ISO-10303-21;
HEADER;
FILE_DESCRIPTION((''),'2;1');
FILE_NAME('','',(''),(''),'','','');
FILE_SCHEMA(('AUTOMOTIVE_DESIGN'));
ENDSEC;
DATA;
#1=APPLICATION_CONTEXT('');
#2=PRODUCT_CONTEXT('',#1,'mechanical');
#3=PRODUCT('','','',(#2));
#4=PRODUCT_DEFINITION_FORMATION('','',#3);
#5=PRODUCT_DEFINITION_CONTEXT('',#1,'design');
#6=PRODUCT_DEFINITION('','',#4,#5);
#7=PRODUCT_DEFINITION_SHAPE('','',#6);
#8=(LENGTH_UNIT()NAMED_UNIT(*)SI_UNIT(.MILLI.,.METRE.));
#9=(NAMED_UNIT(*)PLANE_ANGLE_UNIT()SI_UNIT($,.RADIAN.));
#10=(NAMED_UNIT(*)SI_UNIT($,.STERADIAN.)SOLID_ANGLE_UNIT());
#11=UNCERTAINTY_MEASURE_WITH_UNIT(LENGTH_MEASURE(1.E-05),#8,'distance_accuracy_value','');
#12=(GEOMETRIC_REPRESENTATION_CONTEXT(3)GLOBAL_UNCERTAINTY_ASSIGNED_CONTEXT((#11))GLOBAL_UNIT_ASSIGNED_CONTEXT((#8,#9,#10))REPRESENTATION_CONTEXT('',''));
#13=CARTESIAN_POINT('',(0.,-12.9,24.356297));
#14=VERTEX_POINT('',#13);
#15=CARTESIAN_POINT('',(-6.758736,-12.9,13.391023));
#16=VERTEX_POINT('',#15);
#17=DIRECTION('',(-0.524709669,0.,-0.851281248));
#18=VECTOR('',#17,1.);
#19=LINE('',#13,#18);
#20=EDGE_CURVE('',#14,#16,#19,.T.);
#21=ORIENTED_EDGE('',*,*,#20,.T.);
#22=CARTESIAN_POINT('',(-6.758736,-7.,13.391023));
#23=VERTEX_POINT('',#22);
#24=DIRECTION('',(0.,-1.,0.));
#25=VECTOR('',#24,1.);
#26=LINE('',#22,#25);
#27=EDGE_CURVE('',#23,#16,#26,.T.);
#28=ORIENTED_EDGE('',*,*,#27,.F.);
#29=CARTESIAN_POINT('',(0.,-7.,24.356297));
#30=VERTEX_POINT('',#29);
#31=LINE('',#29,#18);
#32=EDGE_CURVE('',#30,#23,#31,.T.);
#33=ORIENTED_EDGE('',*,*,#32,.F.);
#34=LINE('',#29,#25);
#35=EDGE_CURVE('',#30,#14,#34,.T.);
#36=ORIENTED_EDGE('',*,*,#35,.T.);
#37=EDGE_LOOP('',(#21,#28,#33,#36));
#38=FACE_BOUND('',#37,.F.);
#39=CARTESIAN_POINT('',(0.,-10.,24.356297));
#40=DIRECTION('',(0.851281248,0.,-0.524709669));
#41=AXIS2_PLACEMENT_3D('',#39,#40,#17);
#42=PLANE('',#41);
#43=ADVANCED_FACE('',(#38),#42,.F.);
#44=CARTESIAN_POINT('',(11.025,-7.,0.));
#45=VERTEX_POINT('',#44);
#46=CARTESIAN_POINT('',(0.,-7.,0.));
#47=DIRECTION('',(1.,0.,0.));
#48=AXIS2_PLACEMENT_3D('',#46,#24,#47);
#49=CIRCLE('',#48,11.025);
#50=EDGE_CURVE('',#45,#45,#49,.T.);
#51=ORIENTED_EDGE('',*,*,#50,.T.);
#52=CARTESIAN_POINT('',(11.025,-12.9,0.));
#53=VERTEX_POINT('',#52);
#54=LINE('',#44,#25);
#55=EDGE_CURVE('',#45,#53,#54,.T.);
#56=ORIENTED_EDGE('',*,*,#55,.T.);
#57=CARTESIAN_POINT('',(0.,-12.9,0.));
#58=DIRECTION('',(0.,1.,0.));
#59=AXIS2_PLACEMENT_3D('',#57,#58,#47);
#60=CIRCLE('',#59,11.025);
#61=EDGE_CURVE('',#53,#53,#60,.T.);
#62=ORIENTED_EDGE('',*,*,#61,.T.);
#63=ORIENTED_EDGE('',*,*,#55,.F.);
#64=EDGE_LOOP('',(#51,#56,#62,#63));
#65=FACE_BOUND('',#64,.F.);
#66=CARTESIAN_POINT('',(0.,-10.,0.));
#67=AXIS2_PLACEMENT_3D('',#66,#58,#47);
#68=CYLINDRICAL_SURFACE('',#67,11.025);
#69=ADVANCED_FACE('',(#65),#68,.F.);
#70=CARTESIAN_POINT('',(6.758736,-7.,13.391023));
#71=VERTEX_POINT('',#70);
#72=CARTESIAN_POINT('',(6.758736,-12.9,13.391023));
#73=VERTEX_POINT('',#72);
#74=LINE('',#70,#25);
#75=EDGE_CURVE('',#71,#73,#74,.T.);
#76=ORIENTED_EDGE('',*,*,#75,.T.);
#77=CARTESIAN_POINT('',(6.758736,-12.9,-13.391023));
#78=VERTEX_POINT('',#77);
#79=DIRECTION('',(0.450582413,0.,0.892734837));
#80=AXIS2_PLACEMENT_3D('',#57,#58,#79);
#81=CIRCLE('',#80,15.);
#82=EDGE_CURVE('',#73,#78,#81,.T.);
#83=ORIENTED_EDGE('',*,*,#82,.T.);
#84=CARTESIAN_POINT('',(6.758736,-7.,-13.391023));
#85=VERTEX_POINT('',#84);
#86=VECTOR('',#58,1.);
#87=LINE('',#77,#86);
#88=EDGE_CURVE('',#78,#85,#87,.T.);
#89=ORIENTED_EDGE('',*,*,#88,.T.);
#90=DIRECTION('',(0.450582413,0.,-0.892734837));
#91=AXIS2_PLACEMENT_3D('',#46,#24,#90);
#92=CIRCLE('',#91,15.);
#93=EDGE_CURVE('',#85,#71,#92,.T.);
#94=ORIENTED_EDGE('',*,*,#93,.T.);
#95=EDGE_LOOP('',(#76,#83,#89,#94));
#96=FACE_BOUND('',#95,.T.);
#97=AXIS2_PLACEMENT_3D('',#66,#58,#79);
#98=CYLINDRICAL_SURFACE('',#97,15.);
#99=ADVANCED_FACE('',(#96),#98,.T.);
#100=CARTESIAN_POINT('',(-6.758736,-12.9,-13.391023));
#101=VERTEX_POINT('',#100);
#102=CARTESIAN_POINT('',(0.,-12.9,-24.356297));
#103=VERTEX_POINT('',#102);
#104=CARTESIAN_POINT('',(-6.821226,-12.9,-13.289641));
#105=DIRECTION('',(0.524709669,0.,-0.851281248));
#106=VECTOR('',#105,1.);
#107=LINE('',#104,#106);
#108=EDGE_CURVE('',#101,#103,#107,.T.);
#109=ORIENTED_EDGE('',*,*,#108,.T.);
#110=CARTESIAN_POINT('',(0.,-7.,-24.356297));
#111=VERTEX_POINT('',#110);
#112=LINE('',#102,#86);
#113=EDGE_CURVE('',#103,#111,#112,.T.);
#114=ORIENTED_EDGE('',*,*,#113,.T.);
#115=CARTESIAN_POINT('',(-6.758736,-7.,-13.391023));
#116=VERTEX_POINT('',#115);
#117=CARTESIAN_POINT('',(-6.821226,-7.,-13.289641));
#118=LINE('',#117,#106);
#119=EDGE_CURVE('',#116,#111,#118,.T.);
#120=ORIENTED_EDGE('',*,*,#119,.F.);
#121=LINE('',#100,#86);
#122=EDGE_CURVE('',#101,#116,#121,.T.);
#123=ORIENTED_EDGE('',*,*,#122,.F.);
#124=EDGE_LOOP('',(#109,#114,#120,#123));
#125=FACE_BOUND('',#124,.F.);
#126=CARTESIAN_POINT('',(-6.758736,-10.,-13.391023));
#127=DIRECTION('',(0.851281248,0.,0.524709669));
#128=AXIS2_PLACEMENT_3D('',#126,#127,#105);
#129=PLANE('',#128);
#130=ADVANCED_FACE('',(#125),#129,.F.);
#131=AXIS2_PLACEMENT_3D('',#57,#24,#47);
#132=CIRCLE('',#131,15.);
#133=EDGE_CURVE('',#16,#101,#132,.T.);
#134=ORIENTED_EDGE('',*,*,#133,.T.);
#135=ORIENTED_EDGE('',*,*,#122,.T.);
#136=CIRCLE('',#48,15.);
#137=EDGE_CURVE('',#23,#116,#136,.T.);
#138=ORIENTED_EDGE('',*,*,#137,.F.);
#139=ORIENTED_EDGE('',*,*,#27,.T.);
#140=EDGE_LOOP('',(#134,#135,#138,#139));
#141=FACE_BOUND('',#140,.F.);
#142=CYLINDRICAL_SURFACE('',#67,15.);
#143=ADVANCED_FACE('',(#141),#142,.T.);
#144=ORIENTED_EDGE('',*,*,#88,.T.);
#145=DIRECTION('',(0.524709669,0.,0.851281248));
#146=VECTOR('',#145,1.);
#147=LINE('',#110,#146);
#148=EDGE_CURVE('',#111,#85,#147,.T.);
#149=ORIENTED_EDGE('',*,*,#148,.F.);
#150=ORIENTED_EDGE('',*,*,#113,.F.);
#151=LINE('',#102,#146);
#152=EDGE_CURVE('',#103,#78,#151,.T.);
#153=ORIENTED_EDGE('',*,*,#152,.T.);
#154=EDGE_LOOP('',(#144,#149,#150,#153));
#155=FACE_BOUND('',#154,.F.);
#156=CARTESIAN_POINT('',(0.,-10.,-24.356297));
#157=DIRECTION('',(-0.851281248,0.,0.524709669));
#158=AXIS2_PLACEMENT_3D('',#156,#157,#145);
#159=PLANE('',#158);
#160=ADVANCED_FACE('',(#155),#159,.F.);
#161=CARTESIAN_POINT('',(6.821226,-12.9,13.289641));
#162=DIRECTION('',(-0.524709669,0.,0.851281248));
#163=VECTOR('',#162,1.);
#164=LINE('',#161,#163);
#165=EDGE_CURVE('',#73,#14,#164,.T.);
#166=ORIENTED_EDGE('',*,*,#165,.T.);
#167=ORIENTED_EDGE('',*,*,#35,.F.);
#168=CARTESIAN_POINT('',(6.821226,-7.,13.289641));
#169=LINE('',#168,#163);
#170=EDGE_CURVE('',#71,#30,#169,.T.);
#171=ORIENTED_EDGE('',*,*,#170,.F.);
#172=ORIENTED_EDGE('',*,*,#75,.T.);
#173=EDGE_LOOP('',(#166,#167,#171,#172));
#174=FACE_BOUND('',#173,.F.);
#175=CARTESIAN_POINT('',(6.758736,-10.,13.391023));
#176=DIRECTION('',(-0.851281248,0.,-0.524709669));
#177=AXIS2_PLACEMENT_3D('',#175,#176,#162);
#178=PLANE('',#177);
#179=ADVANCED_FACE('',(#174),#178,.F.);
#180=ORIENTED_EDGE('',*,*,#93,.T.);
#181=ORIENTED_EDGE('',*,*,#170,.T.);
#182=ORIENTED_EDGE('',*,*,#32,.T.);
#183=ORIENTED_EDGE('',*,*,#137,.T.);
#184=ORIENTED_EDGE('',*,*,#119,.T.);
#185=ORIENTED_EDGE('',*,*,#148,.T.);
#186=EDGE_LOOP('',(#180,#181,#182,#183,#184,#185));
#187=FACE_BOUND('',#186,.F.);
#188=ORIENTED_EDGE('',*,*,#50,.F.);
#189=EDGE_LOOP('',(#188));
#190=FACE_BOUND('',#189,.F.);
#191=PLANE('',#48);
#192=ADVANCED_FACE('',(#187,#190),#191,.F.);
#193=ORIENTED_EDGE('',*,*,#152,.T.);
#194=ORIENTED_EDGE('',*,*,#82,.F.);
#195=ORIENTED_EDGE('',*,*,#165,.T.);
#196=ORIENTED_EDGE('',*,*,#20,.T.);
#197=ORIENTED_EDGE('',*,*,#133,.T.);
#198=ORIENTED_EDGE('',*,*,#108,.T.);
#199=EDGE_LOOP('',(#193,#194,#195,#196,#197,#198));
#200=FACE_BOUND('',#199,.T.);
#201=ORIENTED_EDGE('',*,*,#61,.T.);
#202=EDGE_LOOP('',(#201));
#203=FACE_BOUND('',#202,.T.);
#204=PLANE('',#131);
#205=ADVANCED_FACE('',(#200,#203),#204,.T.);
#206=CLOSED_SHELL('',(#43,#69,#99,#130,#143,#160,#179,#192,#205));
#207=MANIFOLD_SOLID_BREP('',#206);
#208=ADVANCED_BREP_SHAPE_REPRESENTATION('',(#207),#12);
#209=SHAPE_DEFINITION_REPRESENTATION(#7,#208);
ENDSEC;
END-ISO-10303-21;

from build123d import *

# Parameters (mm, degrees)
F0_R     = 15
F0_R_2   = 11.025
F3_DEPTH = 25
F2_R     = 11.025
F4_DEPTH = 40.1
F6_DEPTH = 15
F7_DEPTH = 7
F8_DEPTH = 2.9


# Not quite as in the source:
# - ends of sketch curves that miss each other by under 0.0002 mm in the source are joined


with BuildPart() as f3:
    # F0 (on Front) → F3 (new body)
    with BuildSketch(Plane.XZ):
        Circle(F0_R)
        Circle(F0_R_2, mode=Mode.SUBTRACT)
    extrude(amount=F3_DEPTH)


with BuildPart() as f3b:
    # F1 (on Front) → F3, piece 2 (new body)
    with BuildSketch(Plane.XZ):
        Polygon((0, 24.356296724), (-6.821225702, 13.2896405025), (-6.821225702, 0), (0, 0), (6.821225702, 0), (6.821225702, 13.2896405025), align=None)
        Polygon((0, 0), (-6.821225702, 0), (-6.821225702, -10.4577671736), (-6.82123, -10.4854255915), (-6.821225702, -13.2896405025), (0, -24.356296724), (6.821225702, -13.2896405025), (6.821225702, 0), align=None)
    extrude(amount=F3_DEPTH)

    # F2 (on face) → F4 (cut)
    with BuildSketch(Plane.XZ):
        Circle(F2_R)
    extrude(amount=F4_DEPTH, mode=Mode.SUBTRACT)

    # F5: union F3
    add(f3.part)

    # F6 (cut): a face of the model
    f6_faces = [f3b.faces().sort_by_distance(p)[0] for p in [
        (-11.5970941147, -25, 0),
    ]]
    extrude(f6_faces, amount=-F6_DEPTH, mode=Mode.SUBTRACT)

    # F7 (cut): a face of the model
    f7_faces = [f3b.faces().sort_by_distance(p)[0] for p in [
        (-11.5970941147, 0, 0),
    ]]
    extrude(f7_faces, amount=-F7_DEPTH, mode=Mode.SUBTRACT)

    # F8 (add): a face of the model
    f8_faces = [f3b.faces().sort_by_distance(p)[0] for p in [
        (-11.5970941147, -10, 0),
    ]]
    extrude(f8_faces, amount=F8_DEPTH)


solid = f3b.part
